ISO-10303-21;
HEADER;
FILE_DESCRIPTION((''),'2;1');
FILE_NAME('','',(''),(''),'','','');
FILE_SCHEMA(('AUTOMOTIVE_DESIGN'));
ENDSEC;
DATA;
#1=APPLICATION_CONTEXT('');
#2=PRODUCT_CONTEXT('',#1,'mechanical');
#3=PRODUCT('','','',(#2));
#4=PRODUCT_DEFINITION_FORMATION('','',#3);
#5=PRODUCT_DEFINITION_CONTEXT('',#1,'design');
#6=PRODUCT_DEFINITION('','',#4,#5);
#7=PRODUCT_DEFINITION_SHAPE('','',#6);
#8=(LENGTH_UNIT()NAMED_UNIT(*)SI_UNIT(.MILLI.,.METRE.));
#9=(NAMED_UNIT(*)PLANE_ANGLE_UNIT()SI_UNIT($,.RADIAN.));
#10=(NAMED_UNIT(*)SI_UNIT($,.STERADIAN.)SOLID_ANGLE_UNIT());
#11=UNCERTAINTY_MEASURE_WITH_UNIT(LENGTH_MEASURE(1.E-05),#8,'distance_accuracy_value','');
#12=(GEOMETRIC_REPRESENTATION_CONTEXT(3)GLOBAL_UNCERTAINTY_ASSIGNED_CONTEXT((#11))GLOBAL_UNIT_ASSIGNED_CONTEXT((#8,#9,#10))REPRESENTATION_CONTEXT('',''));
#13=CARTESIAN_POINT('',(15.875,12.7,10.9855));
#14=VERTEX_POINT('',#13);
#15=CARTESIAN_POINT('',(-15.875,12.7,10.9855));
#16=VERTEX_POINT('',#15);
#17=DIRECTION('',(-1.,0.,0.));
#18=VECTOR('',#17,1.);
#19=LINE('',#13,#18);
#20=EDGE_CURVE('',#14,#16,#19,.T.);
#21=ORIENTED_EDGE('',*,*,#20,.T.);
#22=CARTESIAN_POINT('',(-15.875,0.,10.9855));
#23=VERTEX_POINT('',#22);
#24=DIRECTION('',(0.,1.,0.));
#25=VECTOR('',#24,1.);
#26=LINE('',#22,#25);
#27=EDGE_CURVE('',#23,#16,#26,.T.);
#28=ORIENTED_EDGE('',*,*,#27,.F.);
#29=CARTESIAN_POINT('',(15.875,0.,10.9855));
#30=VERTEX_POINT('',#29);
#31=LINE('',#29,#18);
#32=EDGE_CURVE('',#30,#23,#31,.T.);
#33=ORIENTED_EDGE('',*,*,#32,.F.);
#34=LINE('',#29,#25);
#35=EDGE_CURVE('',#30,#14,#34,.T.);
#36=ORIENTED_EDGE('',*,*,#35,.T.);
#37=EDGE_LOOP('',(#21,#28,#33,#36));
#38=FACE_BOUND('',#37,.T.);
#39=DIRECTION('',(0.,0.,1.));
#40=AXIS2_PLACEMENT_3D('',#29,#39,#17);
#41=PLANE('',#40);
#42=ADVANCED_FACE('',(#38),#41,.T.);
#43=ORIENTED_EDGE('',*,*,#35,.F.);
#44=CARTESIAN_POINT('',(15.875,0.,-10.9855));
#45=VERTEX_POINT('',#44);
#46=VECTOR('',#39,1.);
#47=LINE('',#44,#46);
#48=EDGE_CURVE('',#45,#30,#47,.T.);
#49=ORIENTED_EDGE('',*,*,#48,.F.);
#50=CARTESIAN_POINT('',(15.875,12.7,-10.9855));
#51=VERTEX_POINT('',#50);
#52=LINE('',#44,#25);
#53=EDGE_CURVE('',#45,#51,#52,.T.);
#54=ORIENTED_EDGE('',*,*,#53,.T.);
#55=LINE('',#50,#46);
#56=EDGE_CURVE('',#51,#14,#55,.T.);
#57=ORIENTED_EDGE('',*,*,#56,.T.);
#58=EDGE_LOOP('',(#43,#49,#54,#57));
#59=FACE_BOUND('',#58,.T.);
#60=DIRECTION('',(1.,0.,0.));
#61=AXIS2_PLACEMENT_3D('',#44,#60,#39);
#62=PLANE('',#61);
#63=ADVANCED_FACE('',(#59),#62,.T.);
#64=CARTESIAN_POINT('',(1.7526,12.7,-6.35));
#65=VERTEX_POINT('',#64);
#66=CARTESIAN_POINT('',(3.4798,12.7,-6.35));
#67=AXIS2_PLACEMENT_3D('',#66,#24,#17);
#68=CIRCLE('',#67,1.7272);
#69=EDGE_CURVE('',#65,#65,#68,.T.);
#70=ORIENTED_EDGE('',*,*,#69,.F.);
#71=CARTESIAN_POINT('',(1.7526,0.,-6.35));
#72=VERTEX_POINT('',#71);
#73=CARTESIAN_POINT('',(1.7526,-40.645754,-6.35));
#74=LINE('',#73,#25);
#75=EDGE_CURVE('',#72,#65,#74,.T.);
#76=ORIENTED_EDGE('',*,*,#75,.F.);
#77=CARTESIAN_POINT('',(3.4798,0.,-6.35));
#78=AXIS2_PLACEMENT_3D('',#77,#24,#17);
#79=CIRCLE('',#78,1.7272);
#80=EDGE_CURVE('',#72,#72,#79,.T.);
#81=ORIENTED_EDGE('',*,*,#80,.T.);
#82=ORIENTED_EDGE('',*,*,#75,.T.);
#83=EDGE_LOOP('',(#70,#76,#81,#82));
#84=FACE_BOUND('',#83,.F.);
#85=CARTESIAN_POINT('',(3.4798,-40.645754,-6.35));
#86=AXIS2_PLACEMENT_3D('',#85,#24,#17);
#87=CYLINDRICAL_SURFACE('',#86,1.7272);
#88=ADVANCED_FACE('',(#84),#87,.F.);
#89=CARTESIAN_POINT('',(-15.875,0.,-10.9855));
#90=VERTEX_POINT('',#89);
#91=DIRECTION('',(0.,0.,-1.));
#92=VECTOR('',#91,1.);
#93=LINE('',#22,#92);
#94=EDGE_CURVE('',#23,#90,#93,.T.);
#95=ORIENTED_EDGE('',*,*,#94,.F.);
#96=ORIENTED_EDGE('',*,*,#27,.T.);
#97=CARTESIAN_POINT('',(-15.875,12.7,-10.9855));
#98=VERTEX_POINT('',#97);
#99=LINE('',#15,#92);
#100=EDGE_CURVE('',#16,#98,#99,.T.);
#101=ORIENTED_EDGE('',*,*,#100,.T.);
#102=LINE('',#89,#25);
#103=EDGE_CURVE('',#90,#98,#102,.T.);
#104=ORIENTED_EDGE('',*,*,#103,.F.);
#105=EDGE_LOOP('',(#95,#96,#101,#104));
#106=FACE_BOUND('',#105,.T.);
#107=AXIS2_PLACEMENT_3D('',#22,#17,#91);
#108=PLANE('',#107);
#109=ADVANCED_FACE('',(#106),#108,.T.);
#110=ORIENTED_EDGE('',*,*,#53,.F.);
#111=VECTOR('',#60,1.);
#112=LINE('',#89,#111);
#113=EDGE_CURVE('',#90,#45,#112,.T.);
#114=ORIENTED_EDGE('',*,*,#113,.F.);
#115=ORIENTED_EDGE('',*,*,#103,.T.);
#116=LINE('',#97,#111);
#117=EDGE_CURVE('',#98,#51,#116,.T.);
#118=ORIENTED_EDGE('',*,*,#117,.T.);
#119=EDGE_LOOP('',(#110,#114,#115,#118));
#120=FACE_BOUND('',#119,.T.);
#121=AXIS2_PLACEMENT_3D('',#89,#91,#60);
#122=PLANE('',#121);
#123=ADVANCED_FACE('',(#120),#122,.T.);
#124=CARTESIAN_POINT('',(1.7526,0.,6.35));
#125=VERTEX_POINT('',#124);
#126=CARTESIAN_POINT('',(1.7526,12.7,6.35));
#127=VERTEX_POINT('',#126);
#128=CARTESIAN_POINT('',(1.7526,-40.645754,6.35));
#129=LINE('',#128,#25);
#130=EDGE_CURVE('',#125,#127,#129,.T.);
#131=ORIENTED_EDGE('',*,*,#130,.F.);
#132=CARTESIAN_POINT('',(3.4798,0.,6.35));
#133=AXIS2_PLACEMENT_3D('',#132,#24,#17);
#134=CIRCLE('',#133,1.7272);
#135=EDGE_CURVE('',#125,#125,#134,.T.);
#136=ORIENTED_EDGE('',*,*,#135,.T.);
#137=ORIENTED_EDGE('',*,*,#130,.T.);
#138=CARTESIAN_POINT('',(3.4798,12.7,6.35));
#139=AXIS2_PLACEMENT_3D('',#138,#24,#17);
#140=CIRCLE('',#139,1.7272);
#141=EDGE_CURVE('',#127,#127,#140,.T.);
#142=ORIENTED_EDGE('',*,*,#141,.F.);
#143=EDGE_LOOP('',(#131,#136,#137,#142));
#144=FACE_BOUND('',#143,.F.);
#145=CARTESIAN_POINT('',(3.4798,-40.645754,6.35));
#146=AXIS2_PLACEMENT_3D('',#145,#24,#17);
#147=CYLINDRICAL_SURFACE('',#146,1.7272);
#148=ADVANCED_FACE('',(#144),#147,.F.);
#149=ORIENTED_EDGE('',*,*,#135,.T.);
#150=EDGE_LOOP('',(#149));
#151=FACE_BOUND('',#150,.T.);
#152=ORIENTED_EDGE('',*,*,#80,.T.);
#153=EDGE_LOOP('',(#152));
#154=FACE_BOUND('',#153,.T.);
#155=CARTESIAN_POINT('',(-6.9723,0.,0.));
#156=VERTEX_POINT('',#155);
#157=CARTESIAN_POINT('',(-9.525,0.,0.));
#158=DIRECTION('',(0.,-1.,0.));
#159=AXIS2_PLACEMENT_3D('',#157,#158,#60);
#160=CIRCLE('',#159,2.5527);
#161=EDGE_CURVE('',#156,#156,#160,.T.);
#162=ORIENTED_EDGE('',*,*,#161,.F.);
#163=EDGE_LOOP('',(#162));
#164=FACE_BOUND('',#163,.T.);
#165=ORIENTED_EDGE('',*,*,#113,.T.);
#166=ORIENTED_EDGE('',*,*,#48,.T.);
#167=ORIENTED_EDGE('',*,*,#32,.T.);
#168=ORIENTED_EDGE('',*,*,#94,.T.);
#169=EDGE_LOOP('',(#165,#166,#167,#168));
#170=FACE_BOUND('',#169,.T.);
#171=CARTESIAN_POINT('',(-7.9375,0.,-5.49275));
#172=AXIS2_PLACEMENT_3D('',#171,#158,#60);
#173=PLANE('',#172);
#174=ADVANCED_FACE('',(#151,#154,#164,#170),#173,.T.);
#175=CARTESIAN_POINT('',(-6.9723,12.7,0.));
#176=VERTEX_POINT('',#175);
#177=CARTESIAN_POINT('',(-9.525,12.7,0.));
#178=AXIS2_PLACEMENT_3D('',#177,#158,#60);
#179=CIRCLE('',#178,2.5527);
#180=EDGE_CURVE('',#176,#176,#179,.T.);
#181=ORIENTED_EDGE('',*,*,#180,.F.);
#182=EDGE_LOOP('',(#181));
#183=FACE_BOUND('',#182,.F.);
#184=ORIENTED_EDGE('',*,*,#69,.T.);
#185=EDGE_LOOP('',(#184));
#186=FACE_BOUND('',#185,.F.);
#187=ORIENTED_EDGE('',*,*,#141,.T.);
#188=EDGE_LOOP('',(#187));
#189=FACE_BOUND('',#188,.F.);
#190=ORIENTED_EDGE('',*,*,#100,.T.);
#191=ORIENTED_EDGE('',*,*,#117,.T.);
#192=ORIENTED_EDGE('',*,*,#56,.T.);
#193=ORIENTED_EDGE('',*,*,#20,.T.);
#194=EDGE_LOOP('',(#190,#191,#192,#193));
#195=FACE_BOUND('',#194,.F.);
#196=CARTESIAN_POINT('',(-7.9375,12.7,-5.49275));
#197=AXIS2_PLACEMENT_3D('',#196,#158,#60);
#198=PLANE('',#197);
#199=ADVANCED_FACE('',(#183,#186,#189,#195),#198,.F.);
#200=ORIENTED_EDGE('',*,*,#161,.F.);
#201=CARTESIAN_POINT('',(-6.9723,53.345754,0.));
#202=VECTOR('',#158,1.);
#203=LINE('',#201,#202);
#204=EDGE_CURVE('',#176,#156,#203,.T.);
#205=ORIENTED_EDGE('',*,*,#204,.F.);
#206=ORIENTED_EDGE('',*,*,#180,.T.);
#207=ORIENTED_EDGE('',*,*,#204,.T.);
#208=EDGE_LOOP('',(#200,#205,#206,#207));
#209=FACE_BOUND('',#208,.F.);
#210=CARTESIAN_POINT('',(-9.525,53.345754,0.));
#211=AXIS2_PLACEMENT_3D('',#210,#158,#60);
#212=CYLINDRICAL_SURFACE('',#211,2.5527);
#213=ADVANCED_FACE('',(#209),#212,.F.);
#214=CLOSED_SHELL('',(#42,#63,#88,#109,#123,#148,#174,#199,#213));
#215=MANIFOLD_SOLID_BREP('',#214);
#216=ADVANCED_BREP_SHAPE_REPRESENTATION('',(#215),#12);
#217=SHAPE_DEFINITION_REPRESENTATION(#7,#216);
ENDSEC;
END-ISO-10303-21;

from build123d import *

# Parameters (mm, degrees)
F0_W     = 3.4798
F0_H     = 6.35
F0_W_2   = 12.3952
F1_DEPTH = 12.7
F2_D     = 3.4544
F4_D     = 5.1054


# Not quite as in the source:
# - a feature names something its author has since deleted; it is built from what else it names


with BuildPart() as f1:
    # F0 (on Front) → F1 (new body)
    with BuildSketch(Plane.XZ):
        Polygon((0, -6.35), (0, 0), (-15.875, 0), (-15.875, -10.9855), (0, -10.9855), align=None)
        Polygon((-15.875, 0), (0, 0), (0, 6.35), (0, 10.9855), (-15.875, 10.9855), align=None)
        Polygon((0, 10.9855), (0, 6.35), (3.4798, 6.35), (15.875, 6.35), (15.875, 10.9855), align=None)
        with Locations((1.7399, 3.175)):
            Rectangle(F0_W, F0_H)
        with Locations((9.6774, 3.175)):
            Rectangle(F0_W_2, F0_H)
        with Locations((9.6774, -3.175)):
            Rectangle(F0_W_2, F0_H)
        with Locations((1.7399, -3.175)):
            Rectangle(F0_W, F0_H)
        Polygon((3.4798, -6.35), (0, -6.35), (0, -10.9855), (15.875, -10.9855), (15.875, -6.35), align=None)
    extrude(amount=-F1_DEPTH)

    # F2 (through all)
    with Locations(Plane.XZ):
        with Locations((3.4798, -6.35), (3.4798, 6.35)):
            Hole(F2_D / 2)

    # F4 (through all)
    with Locations(Plane(origin=(0, 12.7, 0), x_dir=(-1, 0, 0), z_dir=(0, 1, 0))):
        with Locations((9.525, 0)):
            Hole(F4_D / 2)


solid = f1.part
